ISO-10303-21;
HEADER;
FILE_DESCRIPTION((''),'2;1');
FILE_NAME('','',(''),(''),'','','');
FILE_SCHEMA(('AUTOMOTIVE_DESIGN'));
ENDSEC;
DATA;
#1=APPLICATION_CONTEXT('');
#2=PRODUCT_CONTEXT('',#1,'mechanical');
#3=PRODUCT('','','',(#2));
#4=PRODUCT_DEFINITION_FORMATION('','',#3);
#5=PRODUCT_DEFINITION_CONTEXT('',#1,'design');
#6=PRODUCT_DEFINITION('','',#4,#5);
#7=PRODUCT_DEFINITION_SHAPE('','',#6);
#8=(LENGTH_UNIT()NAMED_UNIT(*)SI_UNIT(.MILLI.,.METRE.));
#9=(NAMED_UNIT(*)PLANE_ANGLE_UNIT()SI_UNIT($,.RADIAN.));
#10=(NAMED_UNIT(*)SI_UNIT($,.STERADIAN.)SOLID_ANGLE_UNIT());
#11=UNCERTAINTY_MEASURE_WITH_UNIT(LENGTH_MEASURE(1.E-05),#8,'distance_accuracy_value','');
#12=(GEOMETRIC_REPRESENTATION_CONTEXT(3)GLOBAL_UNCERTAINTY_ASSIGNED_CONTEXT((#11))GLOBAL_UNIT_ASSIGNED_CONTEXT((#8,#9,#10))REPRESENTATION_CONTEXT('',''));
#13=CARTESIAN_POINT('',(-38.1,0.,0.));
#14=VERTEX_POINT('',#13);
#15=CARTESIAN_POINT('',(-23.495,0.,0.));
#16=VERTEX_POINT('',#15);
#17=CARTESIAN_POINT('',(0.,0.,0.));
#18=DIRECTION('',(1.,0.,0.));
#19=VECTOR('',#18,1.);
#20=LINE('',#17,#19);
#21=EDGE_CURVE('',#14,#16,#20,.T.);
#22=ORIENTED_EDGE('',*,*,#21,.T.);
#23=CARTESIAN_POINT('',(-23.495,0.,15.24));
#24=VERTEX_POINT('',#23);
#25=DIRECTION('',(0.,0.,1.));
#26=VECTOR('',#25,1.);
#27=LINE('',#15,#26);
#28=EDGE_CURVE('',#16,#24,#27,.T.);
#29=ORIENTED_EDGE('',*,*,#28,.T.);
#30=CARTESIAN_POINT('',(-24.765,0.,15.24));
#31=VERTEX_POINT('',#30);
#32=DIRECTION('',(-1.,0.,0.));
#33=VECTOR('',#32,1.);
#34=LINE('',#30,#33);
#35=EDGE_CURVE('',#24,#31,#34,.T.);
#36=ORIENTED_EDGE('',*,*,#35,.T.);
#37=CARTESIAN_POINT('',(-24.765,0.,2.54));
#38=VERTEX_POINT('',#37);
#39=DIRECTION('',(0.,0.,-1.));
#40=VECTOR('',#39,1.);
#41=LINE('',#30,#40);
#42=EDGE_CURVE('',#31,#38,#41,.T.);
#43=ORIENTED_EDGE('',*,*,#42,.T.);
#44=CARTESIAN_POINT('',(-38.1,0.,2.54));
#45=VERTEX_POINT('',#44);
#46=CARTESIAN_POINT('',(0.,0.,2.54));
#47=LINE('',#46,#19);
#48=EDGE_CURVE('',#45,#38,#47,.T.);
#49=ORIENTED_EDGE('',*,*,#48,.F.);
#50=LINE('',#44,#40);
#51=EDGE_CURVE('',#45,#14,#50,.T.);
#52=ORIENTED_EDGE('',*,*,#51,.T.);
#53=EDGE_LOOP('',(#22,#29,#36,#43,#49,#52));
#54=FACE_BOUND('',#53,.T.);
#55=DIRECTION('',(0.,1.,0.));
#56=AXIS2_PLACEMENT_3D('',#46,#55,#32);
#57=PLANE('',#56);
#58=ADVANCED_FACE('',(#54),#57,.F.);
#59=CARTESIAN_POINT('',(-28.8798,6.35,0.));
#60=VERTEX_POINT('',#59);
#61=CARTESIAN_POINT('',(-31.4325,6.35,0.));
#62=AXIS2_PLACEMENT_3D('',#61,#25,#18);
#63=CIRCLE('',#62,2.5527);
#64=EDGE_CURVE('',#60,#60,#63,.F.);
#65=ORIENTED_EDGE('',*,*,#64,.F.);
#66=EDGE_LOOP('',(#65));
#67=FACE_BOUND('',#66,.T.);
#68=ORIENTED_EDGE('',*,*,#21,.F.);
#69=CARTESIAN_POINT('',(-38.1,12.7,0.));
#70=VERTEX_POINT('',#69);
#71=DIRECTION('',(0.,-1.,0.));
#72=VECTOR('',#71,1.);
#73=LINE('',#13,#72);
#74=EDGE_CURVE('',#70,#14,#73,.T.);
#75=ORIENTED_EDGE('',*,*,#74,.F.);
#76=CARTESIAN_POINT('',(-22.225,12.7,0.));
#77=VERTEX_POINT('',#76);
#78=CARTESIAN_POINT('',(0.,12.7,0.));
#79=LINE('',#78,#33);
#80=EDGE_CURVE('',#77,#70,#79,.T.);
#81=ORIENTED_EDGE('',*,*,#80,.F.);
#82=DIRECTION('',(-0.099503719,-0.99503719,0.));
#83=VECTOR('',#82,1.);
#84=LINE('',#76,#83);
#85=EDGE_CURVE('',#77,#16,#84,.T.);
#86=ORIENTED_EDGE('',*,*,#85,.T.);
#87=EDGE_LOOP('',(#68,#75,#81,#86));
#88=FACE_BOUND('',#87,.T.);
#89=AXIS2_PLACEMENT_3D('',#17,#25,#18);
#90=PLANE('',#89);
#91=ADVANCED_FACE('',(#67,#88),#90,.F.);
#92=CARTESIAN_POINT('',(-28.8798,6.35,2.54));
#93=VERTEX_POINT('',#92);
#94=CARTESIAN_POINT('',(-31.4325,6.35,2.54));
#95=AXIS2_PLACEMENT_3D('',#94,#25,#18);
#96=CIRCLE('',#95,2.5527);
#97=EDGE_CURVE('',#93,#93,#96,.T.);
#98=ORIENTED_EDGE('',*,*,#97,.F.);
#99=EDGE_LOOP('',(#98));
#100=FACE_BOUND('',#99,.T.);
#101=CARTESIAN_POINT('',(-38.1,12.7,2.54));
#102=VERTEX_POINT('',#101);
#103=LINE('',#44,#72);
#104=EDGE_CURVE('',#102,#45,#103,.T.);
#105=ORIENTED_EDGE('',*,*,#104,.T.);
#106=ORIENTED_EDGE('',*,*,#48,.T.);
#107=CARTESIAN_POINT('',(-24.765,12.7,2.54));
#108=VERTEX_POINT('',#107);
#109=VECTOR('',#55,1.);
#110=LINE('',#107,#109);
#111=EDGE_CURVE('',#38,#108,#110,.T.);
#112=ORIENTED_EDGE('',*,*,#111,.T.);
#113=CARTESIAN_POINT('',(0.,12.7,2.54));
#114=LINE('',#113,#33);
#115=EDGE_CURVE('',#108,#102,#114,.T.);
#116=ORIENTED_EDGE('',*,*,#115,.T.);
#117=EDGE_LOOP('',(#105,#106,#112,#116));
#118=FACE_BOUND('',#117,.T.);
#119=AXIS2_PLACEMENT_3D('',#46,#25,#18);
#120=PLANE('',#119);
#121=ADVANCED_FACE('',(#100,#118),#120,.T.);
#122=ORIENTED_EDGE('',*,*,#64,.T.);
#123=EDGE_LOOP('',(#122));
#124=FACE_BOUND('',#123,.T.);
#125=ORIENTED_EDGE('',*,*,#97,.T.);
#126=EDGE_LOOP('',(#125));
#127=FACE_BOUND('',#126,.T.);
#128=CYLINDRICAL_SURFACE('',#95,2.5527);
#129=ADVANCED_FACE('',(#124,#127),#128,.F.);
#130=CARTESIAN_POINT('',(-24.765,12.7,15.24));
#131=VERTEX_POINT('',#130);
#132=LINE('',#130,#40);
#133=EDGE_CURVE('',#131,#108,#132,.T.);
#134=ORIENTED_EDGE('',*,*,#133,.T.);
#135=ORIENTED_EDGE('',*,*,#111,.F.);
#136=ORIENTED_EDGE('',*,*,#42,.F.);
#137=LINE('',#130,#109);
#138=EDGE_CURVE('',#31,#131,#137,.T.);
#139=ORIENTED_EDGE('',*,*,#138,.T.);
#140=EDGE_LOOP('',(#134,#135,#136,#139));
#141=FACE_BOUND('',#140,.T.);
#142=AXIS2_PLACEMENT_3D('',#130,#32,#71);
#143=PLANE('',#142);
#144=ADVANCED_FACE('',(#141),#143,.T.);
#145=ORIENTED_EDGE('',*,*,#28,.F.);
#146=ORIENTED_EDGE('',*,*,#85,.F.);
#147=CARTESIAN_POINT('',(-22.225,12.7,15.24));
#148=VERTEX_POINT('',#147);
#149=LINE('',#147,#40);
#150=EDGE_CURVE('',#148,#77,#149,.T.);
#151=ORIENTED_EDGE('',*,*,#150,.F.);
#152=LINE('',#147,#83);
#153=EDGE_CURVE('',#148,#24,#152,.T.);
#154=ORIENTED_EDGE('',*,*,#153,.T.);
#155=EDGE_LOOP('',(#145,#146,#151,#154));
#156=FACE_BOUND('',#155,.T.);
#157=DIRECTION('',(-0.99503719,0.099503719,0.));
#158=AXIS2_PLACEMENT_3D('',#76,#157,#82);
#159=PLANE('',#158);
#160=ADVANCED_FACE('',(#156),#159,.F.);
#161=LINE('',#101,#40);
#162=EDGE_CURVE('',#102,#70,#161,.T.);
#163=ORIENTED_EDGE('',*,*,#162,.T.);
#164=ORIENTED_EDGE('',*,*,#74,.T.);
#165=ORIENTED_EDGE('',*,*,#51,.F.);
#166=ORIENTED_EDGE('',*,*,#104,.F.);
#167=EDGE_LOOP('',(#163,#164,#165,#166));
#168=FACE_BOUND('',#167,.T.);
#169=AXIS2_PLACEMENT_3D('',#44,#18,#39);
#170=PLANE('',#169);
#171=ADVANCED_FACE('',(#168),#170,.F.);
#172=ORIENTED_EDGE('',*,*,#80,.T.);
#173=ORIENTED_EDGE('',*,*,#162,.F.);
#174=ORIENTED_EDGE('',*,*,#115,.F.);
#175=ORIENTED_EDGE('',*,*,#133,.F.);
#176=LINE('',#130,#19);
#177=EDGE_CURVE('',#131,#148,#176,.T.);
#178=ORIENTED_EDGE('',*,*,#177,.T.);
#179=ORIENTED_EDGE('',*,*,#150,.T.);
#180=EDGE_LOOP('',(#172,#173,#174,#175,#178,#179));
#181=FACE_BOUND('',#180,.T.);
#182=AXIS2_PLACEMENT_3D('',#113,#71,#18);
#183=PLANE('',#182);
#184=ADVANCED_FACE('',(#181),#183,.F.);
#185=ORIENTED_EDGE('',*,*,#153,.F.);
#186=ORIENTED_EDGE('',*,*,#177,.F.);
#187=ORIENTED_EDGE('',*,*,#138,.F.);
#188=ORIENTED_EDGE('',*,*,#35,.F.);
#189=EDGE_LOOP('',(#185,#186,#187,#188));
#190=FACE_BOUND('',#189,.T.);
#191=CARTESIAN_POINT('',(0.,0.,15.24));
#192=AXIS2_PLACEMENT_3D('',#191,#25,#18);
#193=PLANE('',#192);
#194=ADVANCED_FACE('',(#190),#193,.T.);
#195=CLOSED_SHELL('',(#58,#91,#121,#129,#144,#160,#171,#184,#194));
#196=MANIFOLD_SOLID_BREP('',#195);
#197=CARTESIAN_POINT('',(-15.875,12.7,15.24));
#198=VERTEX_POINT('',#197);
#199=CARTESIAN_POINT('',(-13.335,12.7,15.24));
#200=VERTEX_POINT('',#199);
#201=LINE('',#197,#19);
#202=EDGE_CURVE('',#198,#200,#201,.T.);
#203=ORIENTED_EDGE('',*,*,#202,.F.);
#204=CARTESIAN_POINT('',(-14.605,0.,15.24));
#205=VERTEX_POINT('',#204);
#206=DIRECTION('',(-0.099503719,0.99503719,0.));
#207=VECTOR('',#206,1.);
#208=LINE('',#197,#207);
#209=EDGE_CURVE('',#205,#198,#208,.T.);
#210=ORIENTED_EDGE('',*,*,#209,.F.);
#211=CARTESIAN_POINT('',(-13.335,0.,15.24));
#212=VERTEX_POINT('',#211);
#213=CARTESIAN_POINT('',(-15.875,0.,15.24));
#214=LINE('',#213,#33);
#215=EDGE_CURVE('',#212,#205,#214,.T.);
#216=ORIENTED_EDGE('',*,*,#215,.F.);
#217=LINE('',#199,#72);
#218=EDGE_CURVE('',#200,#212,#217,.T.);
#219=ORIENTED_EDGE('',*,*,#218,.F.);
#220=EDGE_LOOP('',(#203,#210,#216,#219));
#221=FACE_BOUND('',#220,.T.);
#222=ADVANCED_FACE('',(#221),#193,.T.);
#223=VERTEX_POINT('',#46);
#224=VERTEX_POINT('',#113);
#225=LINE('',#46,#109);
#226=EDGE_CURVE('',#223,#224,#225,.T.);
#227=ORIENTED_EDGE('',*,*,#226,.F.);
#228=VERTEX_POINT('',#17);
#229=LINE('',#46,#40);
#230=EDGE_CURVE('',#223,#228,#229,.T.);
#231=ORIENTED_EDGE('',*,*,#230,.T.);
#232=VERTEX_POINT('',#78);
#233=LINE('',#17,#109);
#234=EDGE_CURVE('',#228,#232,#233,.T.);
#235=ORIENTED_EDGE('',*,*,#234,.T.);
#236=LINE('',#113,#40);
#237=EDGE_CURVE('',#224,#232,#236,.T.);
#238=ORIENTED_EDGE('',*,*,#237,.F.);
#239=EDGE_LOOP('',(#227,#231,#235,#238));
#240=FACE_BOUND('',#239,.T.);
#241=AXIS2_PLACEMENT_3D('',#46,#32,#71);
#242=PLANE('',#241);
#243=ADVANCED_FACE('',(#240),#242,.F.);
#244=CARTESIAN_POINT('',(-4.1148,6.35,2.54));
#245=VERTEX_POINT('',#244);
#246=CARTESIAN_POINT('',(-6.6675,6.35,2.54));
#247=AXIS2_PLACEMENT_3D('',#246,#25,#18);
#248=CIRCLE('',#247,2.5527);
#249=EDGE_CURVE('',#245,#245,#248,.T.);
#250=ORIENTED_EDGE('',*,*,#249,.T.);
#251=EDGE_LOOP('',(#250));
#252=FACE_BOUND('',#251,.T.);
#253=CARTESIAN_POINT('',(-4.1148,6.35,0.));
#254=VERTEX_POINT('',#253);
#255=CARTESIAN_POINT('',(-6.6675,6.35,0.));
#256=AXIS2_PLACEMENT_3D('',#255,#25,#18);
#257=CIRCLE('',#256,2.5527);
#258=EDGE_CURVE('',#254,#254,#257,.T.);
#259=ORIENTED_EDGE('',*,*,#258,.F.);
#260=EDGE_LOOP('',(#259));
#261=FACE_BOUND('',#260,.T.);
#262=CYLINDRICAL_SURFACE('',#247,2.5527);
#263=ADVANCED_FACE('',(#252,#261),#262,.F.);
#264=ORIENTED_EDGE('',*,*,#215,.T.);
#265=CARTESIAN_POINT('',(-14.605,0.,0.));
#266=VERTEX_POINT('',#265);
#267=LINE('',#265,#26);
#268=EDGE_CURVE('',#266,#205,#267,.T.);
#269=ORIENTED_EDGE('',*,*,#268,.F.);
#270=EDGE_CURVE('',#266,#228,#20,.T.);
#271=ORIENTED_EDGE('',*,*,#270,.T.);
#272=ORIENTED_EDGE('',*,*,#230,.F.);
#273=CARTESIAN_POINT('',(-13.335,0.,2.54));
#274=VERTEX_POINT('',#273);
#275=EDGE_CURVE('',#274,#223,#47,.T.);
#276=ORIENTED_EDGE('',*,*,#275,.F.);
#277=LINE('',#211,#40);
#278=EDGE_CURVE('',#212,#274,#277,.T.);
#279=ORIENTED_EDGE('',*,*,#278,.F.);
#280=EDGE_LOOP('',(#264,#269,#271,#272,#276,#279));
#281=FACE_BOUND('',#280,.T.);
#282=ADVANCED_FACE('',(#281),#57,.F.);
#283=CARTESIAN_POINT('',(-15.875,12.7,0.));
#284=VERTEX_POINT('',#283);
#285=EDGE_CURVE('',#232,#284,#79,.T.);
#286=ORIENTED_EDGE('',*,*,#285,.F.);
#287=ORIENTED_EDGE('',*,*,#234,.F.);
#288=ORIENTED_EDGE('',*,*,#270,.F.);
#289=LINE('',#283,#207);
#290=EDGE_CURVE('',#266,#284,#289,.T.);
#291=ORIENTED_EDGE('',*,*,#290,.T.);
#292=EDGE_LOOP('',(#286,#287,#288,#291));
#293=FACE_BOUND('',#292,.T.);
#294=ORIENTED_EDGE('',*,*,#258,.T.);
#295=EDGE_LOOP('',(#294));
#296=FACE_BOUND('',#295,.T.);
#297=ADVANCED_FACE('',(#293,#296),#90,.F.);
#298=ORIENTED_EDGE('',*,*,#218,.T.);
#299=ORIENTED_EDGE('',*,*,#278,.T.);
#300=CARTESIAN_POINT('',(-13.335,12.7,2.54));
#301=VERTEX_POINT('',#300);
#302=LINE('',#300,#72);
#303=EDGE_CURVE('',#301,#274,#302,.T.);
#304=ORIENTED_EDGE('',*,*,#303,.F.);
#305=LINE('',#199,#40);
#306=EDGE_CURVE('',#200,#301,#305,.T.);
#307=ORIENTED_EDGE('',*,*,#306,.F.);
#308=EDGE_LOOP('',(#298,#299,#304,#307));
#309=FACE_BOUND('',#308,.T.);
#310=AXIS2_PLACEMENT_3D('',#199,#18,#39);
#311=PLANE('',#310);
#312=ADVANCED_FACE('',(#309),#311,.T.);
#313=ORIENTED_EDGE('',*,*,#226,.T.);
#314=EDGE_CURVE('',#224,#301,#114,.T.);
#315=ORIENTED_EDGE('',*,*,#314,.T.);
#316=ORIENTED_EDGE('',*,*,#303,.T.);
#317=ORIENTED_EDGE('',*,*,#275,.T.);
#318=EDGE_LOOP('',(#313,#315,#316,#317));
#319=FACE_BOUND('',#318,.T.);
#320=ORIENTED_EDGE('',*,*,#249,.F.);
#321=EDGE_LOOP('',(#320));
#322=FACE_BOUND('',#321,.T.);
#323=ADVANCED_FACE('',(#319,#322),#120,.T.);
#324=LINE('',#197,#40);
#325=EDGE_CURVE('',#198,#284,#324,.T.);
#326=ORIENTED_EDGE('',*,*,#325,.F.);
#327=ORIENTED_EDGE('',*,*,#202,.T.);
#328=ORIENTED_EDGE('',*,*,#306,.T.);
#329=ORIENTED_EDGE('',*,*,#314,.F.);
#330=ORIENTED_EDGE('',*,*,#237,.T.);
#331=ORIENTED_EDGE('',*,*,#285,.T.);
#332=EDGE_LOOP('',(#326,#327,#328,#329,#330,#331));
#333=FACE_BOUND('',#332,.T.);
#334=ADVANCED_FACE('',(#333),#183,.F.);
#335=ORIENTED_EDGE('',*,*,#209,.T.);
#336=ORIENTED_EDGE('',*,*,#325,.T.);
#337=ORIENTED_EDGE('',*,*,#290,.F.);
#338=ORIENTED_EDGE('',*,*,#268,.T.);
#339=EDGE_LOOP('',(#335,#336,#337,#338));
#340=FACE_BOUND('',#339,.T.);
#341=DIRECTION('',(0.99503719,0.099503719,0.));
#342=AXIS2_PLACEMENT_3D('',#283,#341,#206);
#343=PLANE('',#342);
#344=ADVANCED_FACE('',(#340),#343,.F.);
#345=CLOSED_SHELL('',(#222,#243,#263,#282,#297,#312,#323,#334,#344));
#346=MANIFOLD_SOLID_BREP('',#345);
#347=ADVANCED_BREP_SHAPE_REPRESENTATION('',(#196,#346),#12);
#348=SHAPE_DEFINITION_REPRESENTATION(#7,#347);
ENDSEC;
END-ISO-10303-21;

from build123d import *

# Parameters (mm, degrees)
SKETCH1_W                      = 38.1
SKETCH1_H                      = 12.7
BOSS_EXTRUDE1_DEPTH            = 2.54
SKETCH2_W                      = 2.54
SKETCH2_H                      = 12.7
BOSS_EXTRUDE2_DEPTH            = 12.7
SKETCH3_W                      = 6.35
SKETCH3_H                      = 12.7
CUT_EXTRUDE1_DEPTH             = 43.121134838
CUT_EXTRUDE2_DEPTH             = 43.955297694
F_10_CLEARANCE_HOLE1_OUTLINE_R = 2.5527
F_10_CLEARANCE_HOLE1_DEPTH     = 2.54


# Read off the part's stored shape, not the designer's step: #10 Clearance Hole1
with BuildPart() as part:
    # Sketch1 → Boss-Extrude1 (new body)
    with BuildSketch(Plane.XY):
        with Locations((-19.05, 6.35)):
            Rectangle(SKETCH1_W, SKETCH1_H)
    extrude(amount=BOSS_EXTRUDE1_DEPTH)

    # Sketch2 → Boss-Extrude2 (add)
    with BuildSketch(Plane(origin=(-38.1, 12.7, 2.54), x_dir=(-1, 0, 0), z_dir=(0, 0, -1))):
        with Locations((-14.605, -6.35)):
            Rectangle(SKETCH2_W, SKETCH2_H)
        with Locations((-23.495, -6.35)):
            Rectangle(SKETCH2_W, SKETCH2_H)
    extrude(amount=-BOSS_EXTRUDE2_DEPTH)

    # Sketch3 → Cut-Extrude1 (cut, through all)
    with BuildSketch(Plane.XY.offset(2.54)):
        with Locations((-19.05, 6.35)):
            Rectangle(SKETCH3_W, SKETCH3_H)
    extrude(amount=-CUT_EXTRUDE1_DEPTH, mode=Mode.SUBTRACT)


with BuildPart() as cut_extrude1_piece_1:
    # of the separate pieces the step leaves, piece 1, a body of its own (cut_extrude1_pieces)
    add(part.part.solids().sort_by_distance((-22.225, 0, 0))[0])


with BuildPart() as cut_extrude1_piece_2:
    # of the separate pieces the step leaves, piece 2, a body of its own (cut_extrude1_pieces)
    add(part.part.solids().sort_by_distance((0, 0, 0))[0])


with BuildPart() as cut_extrude2_tool:
    # Sketch4 → Cut-Extrude2 (new, through all)
    with BuildSketch(Plane.XY.offset(15.24)):
        Polygon((-22.225, 12.7), (-23.495, 0), (-22.225, 0), align=None)
        Polygon((-15.875, 12.7), (-14.605, 0), (-15.875, 0), align=None)
    extrude(amount=-CUT_EXTRUDE2_DEPTH)


with BuildPart() as cut_extrude1_piece_1_1:
    add(cut_extrude1_piece_1.part)

    # Cut-Extrude2: cut by cut_extrude2_tool
    add(cut_extrude2_tool.part, mode=Mode.SUBTRACT)


with BuildPart() as cut_extrude1_piece_2_1:
    add(cut_extrude1_piece_2.part)

    # Cut-Extrude2: cut by cut_extrude2_tool
    add(cut_extrude2_tool.part, mode=Mode.SUBTRACT)


with BuildPart() as f_10_clearance_hole1_tool:
    # #10 Clearance Hole1 outline → #10 Clearance Hole1 (new body)
    with BuildSketch(Plane.XY):
        with Locations((-31.4325, 6.35)):
            Circle(F_10_CLEARANCE_HOLE1_OUTLINE_R)
        with Locations((-6.6675, 6.35)):
            Circle(F_10_CLEARANCE_HOLE1_OUTLINE_R)
    extrude(amount=F_10_CLEARANCE_HOLE1_DEPTH)


with BuildPart() as cut_extrude1_piece_1_2:
    add(cut_extrude1_piece_1_1.part)

    # #10 Clearance Hole1: cut by f_10_clearance_hole1_tool
    add(f_10_clearance_hole1_tool.part, mode=Mode.SUBTRACT)


with BuildPart() as cut_extrude1_piece_2_2:
    add(cut_extrude1_piece_2_1.part)

    # #10 Clearance Hole1: cut by f_10_clearance_hole1_tool
    add(f_10_clearance_hole1_tool.part, mode=Mode.SUBTRACT)


solid = Compound([cut_extrude1_piece_1_2.part, cut_extrude1_piece_2_2.part])
